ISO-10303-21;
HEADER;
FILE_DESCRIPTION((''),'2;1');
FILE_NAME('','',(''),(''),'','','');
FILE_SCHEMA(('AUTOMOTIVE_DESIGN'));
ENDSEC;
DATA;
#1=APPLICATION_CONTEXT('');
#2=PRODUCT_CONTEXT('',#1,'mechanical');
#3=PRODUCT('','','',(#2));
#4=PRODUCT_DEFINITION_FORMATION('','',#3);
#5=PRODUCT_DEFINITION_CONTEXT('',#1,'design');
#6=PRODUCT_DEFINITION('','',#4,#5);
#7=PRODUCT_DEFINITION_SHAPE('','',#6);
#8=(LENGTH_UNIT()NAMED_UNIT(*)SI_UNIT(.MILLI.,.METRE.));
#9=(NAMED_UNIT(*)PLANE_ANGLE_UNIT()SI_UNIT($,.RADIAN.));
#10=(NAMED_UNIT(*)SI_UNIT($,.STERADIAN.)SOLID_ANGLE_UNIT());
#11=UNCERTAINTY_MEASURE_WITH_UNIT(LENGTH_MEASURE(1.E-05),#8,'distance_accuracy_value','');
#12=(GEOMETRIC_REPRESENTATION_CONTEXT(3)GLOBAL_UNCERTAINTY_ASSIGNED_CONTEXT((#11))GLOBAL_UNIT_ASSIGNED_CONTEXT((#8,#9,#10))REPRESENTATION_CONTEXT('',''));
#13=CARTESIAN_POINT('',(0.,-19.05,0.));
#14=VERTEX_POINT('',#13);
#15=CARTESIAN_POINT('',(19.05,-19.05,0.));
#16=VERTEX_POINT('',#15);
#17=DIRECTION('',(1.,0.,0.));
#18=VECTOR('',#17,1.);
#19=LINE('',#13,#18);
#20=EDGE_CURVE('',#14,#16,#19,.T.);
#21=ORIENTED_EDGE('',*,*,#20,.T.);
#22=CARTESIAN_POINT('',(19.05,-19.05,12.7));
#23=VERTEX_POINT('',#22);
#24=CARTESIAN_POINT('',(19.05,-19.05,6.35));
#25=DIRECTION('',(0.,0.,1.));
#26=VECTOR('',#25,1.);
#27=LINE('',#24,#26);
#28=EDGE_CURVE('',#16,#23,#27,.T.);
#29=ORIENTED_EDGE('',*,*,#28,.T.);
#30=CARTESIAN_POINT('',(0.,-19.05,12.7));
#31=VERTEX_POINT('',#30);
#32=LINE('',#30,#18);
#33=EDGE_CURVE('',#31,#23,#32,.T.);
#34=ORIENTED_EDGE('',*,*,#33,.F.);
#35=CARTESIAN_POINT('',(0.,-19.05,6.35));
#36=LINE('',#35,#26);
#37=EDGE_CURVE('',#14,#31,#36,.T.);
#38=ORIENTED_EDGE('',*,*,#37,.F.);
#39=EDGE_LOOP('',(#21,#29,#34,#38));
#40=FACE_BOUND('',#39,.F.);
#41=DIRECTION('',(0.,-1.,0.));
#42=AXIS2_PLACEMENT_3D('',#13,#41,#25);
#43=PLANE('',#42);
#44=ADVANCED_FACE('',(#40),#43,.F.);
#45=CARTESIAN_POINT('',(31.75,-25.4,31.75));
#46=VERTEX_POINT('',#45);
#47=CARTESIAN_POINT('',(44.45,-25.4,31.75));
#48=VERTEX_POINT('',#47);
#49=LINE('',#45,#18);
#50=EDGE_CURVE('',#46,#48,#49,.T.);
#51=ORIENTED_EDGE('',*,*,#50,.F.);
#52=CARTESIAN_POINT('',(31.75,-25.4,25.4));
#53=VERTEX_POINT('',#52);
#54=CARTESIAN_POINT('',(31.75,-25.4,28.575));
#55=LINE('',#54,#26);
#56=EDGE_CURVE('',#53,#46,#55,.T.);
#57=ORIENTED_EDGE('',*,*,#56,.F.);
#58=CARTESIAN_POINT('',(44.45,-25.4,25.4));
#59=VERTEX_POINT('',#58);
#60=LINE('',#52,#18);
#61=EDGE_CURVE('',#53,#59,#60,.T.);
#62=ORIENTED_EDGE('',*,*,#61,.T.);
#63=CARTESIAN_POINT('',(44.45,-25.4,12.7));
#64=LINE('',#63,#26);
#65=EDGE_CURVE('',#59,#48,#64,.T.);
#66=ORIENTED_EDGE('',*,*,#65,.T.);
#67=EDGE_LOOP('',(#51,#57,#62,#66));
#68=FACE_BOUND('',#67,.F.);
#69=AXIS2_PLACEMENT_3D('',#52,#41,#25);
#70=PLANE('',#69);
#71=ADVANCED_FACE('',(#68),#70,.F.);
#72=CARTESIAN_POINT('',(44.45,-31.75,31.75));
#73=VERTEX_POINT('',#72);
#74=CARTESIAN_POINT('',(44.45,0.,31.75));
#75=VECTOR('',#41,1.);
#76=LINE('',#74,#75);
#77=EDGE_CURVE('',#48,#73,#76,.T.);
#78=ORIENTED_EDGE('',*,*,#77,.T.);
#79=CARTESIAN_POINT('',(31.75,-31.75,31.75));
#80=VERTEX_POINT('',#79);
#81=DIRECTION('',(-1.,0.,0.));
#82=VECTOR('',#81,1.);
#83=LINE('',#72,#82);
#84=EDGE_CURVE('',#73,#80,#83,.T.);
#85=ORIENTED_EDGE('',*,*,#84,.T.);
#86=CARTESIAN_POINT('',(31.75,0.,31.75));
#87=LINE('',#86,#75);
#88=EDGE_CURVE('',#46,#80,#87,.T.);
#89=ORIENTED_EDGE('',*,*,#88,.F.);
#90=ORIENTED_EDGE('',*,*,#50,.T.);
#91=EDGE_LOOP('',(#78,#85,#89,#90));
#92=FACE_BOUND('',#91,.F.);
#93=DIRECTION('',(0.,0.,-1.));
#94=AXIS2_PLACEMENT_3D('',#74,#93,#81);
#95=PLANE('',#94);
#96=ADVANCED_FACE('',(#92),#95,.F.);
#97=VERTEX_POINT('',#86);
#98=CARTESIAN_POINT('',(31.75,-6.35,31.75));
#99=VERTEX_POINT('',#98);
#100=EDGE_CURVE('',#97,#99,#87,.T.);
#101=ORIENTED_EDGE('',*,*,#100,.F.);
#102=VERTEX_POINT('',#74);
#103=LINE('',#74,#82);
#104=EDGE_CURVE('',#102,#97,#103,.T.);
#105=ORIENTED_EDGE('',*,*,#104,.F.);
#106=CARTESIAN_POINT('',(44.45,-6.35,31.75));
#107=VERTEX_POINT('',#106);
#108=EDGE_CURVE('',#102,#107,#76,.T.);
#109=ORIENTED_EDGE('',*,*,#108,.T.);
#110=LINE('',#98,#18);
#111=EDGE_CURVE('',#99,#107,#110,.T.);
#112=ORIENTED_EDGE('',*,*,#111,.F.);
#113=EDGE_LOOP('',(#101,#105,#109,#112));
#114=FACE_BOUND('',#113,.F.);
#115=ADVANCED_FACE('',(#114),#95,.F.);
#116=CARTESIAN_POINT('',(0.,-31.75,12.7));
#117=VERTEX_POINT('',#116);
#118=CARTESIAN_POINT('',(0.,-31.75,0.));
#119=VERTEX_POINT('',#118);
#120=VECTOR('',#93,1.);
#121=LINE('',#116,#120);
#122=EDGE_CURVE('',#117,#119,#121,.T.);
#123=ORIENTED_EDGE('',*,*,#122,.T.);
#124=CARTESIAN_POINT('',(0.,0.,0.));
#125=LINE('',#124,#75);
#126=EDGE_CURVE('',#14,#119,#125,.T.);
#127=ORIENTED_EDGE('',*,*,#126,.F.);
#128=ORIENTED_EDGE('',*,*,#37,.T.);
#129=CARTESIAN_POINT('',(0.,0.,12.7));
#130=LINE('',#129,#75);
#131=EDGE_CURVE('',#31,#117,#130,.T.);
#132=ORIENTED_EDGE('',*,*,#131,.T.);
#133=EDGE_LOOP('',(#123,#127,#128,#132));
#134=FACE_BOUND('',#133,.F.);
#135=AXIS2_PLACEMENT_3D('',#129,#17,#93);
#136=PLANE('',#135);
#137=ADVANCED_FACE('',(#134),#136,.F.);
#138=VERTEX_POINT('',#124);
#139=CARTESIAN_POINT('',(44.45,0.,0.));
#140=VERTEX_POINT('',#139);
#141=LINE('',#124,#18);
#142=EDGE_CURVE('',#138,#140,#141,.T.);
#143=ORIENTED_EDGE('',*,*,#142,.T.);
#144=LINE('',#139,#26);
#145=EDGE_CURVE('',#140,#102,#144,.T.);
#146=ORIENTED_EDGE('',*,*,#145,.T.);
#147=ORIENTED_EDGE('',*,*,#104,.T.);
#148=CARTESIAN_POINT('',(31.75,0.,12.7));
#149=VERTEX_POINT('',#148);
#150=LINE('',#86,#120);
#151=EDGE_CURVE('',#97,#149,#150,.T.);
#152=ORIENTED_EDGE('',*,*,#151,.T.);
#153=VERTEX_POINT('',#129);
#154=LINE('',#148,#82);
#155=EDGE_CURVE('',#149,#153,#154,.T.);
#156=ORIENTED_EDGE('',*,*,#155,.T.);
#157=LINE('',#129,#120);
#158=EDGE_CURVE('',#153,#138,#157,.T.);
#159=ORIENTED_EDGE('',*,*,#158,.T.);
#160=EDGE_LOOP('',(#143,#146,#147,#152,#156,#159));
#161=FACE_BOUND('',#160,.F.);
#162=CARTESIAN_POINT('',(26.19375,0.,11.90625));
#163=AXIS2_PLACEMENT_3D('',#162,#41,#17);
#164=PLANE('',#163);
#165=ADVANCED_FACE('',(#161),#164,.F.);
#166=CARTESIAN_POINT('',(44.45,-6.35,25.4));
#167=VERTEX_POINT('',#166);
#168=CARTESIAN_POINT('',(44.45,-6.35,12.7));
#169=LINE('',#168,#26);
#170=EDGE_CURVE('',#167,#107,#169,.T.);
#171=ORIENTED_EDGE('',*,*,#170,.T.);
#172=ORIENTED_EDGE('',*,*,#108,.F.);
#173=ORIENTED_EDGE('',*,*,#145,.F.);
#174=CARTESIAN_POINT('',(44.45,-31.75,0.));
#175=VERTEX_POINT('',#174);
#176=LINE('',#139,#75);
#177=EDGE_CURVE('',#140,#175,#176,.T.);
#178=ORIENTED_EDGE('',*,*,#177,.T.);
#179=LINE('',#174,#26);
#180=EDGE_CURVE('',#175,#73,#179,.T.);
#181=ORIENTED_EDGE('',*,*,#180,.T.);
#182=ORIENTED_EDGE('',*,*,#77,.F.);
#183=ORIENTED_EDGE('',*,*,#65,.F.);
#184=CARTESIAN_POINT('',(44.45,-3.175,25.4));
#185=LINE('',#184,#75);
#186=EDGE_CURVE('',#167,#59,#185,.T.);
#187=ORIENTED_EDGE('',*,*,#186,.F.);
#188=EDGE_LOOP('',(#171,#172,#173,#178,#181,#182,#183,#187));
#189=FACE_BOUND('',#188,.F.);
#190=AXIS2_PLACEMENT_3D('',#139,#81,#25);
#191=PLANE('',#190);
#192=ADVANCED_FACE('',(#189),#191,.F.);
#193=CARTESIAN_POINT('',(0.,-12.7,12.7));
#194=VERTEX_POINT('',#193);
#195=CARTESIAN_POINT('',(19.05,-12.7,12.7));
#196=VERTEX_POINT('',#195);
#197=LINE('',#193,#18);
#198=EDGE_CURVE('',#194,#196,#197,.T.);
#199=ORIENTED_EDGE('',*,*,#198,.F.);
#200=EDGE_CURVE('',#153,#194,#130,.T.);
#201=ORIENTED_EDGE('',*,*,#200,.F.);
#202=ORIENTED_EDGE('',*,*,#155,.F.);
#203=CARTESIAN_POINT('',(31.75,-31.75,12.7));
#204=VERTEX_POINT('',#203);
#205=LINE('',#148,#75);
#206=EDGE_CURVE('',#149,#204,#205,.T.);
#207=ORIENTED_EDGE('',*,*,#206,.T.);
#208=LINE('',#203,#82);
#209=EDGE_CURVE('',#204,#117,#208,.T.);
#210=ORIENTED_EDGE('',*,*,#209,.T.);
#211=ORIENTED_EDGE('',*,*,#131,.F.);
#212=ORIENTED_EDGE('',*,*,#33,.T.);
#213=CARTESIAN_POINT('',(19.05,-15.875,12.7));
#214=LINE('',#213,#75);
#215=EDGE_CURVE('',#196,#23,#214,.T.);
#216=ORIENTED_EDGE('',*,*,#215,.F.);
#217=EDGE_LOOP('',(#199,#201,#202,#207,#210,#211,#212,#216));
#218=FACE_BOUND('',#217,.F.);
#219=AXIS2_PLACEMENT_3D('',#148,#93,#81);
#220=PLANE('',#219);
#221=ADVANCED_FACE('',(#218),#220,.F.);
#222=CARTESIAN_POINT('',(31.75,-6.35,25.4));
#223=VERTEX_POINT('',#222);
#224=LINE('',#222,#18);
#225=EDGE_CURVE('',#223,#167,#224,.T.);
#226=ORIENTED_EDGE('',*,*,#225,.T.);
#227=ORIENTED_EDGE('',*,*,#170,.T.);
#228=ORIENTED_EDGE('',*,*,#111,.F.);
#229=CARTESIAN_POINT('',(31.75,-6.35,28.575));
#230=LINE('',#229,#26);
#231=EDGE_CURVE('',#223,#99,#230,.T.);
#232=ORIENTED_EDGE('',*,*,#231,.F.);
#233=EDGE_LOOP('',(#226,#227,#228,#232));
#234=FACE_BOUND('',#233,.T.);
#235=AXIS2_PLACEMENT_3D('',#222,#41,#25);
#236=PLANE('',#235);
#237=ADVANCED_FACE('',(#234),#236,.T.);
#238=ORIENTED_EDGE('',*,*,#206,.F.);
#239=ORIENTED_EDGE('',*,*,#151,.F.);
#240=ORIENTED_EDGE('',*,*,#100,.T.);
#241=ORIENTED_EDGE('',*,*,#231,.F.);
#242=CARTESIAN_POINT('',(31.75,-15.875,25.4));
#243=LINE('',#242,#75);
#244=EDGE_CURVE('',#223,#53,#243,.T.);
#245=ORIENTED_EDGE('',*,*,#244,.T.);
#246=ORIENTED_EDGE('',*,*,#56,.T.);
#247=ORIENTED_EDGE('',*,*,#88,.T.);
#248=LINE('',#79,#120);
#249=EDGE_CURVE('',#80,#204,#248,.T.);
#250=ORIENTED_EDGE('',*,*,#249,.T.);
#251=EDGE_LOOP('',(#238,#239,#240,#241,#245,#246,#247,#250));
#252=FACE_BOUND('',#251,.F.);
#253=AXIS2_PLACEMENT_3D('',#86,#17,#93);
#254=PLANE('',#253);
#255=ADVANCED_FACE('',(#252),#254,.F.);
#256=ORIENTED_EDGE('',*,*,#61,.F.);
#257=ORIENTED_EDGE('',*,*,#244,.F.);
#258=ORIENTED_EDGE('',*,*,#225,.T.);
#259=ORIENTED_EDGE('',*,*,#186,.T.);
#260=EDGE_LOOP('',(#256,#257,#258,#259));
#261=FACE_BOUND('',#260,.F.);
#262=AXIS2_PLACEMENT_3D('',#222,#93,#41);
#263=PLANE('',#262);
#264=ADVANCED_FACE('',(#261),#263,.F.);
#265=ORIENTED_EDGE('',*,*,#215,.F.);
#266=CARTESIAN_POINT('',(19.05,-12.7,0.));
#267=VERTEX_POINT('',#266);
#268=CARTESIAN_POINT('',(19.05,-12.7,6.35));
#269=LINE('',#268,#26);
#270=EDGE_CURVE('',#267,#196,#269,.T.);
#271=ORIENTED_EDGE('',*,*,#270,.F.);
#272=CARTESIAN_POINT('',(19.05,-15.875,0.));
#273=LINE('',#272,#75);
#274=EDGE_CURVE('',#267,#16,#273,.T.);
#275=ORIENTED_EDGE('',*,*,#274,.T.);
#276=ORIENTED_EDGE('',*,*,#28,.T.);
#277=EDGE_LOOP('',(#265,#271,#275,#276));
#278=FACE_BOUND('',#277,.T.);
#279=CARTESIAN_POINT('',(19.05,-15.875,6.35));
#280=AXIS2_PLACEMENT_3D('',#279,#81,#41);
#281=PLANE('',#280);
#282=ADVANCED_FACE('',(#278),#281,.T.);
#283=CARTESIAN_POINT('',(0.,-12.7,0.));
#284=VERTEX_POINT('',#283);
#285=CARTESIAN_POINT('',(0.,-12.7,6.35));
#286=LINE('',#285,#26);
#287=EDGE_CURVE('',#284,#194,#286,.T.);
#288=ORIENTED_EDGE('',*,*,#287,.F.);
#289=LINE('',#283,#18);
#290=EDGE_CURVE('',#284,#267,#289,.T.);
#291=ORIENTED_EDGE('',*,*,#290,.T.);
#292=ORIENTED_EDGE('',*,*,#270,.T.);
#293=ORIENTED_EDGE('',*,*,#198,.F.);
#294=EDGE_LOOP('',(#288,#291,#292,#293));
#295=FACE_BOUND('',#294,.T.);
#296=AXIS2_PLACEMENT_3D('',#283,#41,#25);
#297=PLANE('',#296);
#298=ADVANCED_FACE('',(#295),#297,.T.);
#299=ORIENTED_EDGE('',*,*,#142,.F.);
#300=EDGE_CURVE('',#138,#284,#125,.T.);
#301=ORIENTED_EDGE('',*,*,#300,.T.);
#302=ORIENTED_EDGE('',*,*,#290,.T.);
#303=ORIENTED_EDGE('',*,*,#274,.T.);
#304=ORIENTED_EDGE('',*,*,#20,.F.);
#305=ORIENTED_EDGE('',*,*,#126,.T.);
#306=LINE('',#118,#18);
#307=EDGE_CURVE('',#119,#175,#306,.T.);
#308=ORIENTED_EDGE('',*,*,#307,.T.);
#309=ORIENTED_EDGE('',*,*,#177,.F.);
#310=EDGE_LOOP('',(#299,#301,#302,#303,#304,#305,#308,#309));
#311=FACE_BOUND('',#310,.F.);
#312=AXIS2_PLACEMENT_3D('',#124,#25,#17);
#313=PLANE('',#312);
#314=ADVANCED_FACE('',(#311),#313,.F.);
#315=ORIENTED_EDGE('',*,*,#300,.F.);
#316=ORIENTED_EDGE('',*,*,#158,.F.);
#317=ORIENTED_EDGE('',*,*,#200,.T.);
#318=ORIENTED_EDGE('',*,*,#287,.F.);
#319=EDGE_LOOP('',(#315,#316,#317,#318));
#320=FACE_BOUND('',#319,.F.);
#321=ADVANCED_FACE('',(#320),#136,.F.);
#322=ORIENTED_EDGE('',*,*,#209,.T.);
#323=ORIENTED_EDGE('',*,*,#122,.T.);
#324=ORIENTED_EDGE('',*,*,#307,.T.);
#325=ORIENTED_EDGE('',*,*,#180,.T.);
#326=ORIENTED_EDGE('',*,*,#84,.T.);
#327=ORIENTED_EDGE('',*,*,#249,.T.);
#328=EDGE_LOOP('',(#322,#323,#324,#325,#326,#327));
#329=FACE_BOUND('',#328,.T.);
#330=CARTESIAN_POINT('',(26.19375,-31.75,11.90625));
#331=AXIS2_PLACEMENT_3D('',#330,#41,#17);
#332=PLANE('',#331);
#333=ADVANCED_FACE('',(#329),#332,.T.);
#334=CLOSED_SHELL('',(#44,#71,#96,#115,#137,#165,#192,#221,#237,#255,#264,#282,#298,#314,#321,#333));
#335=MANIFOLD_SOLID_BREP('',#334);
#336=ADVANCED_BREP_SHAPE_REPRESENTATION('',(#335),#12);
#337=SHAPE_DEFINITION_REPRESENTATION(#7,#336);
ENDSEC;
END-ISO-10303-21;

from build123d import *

# Parameters (mm, degrees)
F1_DEPTH = 31.75
F2_W     = 19.05
F2_H     = 6.35
F3_DEPTH = 25.4
F4_W     = 6.35
F4_H     = 12.7
F5_DEPTH = 19.05


# Not quite as in the source:
# - a feature names something its author has since deleted; it is built from what else it names


with BuildPart() as f1:
    # F0 (on Front) → F1 (new body)
    with BuildSketch(Plane.XZ):
        Polygon((0, 12.7), (0, 0), (44.45, 0), (44.45, 12.7), (44.45, 31.75), (31.75, 31.75), (31.75, 12.7), align=None)
    extrude(amount=F1_DEPTH)

    # F2 (on face) → F3 (cut)
    with BuildSketch(Plane(origin=(31.75, 0, 0), x_dir=(0, -1, 0), z_dir=(-1, 0, 0))):
        with Locations((15.875, 28.575)):
            Rectangle(F2_W, F2_H)
    extrude(amount=-F3_DEPTH, mode=Mode.SUBTRACT)

    # F4 (on face) → F5 (cut)
    with BuildSketch(Plane(origin=(0, 0, 0), x_dir=(0, -1, 0), z_dir=(-1, 0, 0))):
        with Locations((15.875, 6.35)):
            Rectangle(F4_W, F4_H)
    extrude(amount=-F5_DEPTH, mode=Mode.SUBTRACT)


solid = f1.part
